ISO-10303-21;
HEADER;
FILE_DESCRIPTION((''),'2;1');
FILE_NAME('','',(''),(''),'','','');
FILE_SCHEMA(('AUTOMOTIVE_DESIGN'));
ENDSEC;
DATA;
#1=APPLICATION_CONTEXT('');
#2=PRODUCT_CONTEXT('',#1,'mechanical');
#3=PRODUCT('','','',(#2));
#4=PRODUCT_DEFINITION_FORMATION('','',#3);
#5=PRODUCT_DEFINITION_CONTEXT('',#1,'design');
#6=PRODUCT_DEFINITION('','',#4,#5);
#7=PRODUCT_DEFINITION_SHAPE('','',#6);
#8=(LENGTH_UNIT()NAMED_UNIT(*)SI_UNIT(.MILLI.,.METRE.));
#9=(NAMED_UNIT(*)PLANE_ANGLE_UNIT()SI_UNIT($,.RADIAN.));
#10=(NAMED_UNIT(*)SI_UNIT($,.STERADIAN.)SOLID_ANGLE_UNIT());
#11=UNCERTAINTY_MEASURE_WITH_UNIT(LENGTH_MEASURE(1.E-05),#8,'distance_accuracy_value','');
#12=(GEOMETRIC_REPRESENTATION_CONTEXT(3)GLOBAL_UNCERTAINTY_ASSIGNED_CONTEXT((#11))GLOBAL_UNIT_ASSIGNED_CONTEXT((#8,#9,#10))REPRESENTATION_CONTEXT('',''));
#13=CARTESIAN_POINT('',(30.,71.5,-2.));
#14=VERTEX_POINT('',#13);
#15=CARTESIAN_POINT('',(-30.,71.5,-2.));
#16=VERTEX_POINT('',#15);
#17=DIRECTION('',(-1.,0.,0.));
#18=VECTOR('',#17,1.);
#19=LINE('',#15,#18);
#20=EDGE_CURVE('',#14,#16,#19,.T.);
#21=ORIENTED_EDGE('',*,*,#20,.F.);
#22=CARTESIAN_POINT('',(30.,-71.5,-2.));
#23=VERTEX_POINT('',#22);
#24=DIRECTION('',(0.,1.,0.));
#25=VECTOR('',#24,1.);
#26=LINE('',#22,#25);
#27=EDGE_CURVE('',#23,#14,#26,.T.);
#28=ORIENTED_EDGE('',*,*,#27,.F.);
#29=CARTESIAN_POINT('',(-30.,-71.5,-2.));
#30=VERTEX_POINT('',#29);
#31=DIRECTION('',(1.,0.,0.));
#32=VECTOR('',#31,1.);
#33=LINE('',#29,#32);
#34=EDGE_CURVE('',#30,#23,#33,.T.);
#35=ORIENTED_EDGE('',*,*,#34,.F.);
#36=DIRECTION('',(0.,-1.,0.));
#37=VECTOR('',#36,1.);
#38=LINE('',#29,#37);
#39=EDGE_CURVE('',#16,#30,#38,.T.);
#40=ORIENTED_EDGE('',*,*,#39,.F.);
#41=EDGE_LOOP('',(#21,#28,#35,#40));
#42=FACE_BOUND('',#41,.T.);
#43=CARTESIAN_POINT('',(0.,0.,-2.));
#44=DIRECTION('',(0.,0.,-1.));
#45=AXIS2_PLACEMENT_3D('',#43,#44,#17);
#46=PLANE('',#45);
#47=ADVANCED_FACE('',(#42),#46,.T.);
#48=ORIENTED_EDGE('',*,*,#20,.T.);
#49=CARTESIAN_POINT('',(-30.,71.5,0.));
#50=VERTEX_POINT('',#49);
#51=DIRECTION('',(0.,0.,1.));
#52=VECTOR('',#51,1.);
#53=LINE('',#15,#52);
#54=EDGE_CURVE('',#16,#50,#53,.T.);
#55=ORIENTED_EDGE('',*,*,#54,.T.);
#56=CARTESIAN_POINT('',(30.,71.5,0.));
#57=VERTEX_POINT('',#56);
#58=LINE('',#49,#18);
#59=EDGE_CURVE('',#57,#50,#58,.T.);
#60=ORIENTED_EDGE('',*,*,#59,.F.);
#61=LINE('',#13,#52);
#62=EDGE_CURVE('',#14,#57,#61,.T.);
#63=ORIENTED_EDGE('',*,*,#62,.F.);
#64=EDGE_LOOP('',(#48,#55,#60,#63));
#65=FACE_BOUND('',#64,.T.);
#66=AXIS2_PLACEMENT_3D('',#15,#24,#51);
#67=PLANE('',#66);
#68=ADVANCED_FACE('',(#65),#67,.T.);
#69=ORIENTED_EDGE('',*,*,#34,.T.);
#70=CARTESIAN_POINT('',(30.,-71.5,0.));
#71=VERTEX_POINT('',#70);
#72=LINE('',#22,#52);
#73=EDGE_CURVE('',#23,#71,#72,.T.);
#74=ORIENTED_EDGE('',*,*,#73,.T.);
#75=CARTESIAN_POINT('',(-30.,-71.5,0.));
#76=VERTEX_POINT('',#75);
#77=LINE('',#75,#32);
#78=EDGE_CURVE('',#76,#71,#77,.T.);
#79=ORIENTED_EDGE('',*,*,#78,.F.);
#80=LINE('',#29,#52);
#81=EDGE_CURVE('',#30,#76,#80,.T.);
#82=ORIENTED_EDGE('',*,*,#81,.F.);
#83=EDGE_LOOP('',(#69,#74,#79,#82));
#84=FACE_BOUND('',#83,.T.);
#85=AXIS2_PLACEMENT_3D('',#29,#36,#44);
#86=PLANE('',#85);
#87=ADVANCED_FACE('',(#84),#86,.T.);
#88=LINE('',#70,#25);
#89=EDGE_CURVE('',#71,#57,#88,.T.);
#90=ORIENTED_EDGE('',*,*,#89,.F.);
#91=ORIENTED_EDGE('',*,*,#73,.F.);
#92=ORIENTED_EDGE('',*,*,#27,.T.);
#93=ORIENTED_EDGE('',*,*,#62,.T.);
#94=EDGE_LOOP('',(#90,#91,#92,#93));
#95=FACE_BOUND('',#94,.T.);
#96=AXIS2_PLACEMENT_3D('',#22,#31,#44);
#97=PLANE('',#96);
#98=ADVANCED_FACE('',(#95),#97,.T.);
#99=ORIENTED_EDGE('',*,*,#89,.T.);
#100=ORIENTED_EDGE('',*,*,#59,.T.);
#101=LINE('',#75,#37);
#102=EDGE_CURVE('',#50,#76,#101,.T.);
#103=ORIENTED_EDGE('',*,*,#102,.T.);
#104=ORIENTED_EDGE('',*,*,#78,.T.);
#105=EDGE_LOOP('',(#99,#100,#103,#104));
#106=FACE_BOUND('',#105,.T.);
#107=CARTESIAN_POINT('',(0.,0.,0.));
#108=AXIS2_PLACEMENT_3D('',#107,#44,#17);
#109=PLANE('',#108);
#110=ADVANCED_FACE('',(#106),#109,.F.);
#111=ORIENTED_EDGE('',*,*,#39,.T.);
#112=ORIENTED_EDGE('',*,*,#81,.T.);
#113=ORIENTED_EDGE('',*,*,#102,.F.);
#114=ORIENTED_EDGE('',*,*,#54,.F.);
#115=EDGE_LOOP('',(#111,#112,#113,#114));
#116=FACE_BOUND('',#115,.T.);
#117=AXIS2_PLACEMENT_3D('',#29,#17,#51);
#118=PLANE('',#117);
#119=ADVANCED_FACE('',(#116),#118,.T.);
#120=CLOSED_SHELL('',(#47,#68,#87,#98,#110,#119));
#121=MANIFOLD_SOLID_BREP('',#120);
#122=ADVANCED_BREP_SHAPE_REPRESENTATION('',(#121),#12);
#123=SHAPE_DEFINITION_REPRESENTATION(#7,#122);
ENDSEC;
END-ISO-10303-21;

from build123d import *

# Parameters (mm, degrees)
SKETCH1_W          = 60
SKETCH1_H          = 143
BASE_FLANGE1_DEPTH = 2


# Sheet-metal steps are written as plain solids
with BuildPart() as part:
    # Sketch1 → Base-Flange1 (new body)
    with BuildSketch(Plane.XY):
        Rectangle(SKETCH1_W, SKETCH1_H)
    extrude(amount=-BASE_FLANGE1_DEPTH)


solid = part.part
